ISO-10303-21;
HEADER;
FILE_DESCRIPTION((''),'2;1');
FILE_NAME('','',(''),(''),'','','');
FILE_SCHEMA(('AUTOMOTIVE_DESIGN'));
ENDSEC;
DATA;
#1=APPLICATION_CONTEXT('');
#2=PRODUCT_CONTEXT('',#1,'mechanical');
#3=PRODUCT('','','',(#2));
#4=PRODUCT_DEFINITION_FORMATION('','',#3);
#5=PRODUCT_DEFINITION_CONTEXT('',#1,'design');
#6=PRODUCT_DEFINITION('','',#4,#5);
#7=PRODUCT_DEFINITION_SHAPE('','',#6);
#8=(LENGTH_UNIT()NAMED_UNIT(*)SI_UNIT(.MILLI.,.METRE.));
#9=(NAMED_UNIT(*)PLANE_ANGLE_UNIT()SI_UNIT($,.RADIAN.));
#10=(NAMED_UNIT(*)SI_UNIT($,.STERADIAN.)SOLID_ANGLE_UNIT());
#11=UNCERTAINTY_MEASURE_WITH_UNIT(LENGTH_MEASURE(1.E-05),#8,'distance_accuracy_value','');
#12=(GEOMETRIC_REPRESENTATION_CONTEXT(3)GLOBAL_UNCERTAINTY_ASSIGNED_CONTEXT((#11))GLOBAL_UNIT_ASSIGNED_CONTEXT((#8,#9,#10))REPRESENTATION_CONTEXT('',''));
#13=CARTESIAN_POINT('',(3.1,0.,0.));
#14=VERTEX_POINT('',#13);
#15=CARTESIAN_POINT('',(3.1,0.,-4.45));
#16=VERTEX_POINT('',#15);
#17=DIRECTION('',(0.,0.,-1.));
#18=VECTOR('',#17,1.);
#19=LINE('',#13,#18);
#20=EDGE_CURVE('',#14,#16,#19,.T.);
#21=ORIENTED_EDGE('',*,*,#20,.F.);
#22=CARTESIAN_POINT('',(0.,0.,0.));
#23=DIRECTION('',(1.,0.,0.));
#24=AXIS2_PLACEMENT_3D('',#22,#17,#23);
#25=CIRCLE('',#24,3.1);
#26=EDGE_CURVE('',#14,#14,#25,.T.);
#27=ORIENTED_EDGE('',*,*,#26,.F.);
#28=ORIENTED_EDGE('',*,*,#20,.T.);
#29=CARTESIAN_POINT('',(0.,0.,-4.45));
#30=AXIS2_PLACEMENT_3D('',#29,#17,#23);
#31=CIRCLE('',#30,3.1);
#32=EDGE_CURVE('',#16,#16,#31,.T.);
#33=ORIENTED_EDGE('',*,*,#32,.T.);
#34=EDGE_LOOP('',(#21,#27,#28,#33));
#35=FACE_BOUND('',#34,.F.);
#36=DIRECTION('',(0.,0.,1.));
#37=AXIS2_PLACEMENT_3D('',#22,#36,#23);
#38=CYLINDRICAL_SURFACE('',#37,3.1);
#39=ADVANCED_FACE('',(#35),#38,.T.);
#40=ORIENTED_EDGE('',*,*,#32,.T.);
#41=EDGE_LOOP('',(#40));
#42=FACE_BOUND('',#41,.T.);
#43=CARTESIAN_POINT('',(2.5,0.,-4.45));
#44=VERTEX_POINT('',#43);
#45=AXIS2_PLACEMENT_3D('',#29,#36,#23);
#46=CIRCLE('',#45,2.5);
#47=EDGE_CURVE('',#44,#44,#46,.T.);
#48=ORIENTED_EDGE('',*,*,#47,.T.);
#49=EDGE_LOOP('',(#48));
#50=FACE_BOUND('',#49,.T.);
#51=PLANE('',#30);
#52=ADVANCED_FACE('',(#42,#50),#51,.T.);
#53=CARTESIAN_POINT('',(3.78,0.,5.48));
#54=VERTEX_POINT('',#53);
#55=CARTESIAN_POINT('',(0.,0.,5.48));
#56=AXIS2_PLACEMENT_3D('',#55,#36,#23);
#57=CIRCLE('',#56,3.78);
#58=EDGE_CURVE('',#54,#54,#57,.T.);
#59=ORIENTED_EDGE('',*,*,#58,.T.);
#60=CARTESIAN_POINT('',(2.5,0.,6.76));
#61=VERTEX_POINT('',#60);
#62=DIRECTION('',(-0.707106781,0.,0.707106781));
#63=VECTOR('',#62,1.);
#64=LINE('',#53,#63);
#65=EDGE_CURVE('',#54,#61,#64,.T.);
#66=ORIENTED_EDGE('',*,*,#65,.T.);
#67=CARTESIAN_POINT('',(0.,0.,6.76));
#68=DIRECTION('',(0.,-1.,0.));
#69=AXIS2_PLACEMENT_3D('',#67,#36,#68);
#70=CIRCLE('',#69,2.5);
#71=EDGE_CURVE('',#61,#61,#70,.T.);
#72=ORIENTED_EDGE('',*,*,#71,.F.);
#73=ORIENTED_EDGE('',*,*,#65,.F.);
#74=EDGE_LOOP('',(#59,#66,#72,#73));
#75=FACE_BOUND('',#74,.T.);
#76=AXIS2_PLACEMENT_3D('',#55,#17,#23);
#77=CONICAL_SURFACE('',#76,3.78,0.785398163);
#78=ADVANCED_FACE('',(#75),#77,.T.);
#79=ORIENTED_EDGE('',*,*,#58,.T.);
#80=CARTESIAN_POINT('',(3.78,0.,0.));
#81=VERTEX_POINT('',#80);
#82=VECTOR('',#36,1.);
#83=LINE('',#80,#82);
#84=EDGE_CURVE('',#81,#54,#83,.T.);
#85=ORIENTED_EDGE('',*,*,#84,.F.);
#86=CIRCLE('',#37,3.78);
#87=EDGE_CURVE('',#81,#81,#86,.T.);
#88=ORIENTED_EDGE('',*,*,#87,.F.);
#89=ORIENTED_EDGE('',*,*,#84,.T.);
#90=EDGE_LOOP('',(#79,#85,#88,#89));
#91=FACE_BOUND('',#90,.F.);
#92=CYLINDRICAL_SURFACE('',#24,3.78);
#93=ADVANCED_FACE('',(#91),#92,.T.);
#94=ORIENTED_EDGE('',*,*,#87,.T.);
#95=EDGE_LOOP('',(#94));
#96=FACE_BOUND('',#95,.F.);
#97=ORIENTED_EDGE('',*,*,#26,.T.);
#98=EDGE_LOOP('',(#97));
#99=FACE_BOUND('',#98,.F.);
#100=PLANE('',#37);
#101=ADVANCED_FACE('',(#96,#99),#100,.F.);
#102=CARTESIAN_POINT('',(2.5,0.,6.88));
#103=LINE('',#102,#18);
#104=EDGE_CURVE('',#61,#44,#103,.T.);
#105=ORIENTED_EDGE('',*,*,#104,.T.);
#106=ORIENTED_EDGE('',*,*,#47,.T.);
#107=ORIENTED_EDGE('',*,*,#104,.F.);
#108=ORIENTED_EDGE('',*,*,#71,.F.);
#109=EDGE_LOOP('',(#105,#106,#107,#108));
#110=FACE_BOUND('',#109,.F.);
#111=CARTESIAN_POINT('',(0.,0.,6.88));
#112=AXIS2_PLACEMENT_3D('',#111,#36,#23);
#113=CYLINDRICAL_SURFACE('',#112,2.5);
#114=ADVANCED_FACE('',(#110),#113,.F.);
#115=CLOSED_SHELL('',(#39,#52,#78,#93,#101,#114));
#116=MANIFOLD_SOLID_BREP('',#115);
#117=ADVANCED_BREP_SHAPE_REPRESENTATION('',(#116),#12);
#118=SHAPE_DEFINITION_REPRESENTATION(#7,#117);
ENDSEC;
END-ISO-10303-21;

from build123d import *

# Parameters (mm, degrees)
F0_R     = 3.78
F1_DEPTH = 6.88
F2_R     = 3.1
F3_DEPTH = 4.45
F4_R     = 2.5
F5_DEPTH = 11.6


# Not quite as in the source:
# - a fillet or chamfer that OpenCascade refuses, or shapes differently, is made with other operations: its cross-section is extruded or revolved along the edge and cut away or added


with BuildPart() as f1:
    # F0 (on Top) → F1 (new body)
    with BuildSketch(Plane.XY):
        Circle(F0_R)
    extrude(amount=F1_DEPTH)

    # F2 (on face) → F3 (join)
    with BuildSketch(Plane(origin=(0, 0, 0), x_dir=(1, 0, 0), z_dir=(0, 0, -1))):
        Circle(F2_R)
    extrude(amount=F3_DEPTH)

    # F4 (on face) → F5 (cut)
    with BuildSketch(Plane.XY.offset(6.88)):
        Circle(F4_R)
    extrude(amount=-F5_DEPTH, mode=Mode.SUBTRACT)

    # F6: chamfer of 1.4 on 1 edges, made by hand

    # F6_s1 → F6_t2 (revolve, cut)
    with BuildSketch(Plane.XZ):
        Polygon((3.78, 5.48), (2.38, 6.88), (3.78, 6.88), align=None)
    revolve(axis=Axis((0, 0, 6.88), (0, 0, 1)), mode=Mode.SUBTRACT)


solid = f1.part
